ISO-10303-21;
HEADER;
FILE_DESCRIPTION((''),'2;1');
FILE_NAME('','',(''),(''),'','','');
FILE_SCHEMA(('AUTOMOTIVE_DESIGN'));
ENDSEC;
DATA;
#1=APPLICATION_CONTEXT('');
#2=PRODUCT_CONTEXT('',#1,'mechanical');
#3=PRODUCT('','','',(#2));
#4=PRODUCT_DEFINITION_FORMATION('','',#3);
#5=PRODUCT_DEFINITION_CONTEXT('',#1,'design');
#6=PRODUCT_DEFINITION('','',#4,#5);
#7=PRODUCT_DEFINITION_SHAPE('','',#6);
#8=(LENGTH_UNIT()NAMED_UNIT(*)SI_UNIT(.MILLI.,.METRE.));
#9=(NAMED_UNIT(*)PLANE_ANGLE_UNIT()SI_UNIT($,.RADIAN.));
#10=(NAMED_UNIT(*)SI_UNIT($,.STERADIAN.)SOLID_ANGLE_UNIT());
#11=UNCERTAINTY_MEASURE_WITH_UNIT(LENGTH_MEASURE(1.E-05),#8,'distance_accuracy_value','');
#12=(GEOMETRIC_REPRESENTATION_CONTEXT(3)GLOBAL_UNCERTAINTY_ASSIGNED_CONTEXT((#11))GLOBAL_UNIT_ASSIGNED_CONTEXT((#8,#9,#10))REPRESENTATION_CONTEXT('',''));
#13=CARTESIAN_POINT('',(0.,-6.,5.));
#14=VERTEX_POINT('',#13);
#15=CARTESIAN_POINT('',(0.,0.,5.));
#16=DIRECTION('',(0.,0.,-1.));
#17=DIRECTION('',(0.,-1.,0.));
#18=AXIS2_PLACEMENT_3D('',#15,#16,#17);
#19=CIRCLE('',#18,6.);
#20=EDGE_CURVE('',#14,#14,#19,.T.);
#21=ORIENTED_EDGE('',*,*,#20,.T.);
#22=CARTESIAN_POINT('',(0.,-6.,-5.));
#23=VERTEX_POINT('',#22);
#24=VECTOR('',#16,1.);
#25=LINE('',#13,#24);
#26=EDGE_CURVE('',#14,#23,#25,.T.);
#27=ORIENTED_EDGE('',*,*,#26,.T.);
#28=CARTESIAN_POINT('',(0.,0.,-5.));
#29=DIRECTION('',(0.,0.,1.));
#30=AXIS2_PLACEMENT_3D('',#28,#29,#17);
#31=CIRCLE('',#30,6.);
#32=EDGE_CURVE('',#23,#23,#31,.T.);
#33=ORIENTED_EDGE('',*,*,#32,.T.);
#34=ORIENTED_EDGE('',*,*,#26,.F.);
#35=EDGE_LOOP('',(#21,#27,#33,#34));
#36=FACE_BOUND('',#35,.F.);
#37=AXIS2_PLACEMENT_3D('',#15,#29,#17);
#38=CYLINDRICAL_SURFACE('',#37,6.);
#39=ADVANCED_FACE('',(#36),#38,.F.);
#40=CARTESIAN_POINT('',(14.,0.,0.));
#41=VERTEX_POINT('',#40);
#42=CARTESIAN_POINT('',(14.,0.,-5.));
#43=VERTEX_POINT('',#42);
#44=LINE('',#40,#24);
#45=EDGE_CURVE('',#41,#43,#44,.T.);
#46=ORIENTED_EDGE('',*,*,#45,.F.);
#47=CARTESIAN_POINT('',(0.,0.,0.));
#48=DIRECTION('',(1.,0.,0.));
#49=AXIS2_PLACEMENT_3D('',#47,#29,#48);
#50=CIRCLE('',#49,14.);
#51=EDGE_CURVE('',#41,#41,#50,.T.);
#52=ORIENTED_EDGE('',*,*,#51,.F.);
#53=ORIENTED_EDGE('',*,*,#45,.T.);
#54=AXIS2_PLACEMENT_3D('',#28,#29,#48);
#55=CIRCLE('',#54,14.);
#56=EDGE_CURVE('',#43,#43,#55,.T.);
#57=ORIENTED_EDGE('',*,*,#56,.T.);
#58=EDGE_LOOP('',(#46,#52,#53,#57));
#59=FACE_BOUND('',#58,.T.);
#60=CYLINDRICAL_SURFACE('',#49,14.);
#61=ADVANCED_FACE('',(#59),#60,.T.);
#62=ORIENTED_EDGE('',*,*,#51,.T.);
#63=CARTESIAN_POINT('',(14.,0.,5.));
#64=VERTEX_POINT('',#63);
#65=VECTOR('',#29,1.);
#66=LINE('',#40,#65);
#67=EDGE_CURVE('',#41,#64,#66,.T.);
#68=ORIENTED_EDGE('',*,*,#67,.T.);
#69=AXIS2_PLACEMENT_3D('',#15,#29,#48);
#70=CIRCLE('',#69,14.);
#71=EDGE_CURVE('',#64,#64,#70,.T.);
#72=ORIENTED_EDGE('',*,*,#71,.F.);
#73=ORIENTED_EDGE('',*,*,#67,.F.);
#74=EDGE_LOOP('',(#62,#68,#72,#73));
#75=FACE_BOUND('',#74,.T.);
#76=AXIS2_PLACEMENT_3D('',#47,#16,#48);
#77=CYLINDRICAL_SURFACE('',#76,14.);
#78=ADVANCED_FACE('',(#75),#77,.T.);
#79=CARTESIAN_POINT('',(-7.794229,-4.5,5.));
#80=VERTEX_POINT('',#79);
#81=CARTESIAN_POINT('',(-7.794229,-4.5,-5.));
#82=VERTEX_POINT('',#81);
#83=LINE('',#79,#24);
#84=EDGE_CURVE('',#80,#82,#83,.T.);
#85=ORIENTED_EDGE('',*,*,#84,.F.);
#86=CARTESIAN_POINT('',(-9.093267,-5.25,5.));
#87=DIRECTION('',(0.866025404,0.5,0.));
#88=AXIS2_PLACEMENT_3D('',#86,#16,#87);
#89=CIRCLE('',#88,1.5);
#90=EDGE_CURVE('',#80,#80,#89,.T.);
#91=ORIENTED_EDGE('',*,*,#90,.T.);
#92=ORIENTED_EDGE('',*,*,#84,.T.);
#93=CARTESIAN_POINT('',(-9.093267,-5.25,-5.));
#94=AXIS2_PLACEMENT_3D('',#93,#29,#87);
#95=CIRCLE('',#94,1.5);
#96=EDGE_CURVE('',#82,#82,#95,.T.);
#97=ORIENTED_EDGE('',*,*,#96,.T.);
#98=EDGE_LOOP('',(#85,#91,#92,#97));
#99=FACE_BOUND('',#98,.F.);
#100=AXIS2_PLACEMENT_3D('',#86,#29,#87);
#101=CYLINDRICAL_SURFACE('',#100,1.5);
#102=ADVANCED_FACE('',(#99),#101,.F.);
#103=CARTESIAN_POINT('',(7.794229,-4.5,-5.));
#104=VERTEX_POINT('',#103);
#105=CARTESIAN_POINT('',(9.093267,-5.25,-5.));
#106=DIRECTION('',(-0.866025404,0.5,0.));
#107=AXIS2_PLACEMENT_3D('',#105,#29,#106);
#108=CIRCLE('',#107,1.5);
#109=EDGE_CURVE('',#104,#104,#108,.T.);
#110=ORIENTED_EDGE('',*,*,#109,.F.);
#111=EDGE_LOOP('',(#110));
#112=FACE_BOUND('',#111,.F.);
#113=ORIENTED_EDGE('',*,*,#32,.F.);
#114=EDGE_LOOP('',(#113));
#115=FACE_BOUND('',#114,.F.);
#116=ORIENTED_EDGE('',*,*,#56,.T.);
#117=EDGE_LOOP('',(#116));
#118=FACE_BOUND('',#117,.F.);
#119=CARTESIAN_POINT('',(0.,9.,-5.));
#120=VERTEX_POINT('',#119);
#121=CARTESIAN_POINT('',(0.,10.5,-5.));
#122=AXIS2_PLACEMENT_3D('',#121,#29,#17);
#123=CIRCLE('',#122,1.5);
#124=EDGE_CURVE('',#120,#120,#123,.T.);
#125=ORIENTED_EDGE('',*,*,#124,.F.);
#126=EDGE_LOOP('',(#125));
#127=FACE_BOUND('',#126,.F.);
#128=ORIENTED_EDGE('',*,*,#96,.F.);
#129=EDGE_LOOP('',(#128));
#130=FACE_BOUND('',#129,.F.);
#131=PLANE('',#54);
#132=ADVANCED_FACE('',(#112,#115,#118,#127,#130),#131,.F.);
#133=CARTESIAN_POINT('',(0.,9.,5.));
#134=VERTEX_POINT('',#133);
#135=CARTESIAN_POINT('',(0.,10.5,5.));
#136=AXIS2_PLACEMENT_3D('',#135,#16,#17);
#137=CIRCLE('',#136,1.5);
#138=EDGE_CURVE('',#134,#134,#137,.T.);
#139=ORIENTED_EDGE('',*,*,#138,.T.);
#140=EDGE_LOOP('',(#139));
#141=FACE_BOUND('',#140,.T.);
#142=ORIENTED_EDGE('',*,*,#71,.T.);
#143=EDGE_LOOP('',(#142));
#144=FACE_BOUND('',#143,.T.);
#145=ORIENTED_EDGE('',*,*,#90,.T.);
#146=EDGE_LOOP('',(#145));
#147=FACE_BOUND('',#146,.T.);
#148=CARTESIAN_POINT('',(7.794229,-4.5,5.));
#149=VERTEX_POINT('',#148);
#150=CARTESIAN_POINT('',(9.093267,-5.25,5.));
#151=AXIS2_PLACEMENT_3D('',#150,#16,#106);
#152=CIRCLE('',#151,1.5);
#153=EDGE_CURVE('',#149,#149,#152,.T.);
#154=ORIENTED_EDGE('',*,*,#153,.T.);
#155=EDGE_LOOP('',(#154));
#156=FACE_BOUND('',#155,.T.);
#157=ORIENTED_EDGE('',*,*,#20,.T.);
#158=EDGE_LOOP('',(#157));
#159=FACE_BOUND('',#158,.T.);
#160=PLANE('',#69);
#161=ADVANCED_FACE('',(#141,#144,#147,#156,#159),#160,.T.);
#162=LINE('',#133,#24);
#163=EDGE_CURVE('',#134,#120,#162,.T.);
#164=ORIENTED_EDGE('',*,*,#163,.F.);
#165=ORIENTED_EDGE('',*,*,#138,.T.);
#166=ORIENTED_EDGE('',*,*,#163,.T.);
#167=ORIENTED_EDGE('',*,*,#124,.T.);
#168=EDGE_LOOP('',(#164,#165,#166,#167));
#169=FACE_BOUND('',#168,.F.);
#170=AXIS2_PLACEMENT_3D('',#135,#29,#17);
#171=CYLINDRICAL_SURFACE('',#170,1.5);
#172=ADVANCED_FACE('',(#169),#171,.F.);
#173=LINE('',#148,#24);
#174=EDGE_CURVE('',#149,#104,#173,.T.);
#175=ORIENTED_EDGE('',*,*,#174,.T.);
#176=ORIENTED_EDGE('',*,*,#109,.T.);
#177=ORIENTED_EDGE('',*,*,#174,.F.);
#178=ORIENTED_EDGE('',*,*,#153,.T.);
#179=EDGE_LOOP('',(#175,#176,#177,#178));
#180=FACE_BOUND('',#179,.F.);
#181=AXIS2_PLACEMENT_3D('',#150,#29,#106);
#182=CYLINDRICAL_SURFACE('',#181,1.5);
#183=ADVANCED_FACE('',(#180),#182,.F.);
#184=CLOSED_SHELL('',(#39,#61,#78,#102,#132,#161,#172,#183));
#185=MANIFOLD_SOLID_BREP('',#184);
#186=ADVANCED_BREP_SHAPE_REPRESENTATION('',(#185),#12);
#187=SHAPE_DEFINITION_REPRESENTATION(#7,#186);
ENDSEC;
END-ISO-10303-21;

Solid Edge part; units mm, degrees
sketch "Sketch1" plane through (0, 0, 0) normal (0, 0, 1) x (1, 0, 0)
  circle A0 centre (0, 0) radius 14
extrude "Protrusion1" add sketch "Sketch1" along normal mid plane 10
hole "Bohrung_1" at (0, 0, 5) direction (0, 0, -1) diameter 12 end up to next
hole "Bohrung_2" at (0, 10.5, 5) direction (0, 0, -1) diameter 3 end up to next
pattern_circular "Pattern1" count 3 over 360 about axis through (0, 0, 5) along (0, 0, 1) of "Bohrung_2"
properties material "Wheel2"
